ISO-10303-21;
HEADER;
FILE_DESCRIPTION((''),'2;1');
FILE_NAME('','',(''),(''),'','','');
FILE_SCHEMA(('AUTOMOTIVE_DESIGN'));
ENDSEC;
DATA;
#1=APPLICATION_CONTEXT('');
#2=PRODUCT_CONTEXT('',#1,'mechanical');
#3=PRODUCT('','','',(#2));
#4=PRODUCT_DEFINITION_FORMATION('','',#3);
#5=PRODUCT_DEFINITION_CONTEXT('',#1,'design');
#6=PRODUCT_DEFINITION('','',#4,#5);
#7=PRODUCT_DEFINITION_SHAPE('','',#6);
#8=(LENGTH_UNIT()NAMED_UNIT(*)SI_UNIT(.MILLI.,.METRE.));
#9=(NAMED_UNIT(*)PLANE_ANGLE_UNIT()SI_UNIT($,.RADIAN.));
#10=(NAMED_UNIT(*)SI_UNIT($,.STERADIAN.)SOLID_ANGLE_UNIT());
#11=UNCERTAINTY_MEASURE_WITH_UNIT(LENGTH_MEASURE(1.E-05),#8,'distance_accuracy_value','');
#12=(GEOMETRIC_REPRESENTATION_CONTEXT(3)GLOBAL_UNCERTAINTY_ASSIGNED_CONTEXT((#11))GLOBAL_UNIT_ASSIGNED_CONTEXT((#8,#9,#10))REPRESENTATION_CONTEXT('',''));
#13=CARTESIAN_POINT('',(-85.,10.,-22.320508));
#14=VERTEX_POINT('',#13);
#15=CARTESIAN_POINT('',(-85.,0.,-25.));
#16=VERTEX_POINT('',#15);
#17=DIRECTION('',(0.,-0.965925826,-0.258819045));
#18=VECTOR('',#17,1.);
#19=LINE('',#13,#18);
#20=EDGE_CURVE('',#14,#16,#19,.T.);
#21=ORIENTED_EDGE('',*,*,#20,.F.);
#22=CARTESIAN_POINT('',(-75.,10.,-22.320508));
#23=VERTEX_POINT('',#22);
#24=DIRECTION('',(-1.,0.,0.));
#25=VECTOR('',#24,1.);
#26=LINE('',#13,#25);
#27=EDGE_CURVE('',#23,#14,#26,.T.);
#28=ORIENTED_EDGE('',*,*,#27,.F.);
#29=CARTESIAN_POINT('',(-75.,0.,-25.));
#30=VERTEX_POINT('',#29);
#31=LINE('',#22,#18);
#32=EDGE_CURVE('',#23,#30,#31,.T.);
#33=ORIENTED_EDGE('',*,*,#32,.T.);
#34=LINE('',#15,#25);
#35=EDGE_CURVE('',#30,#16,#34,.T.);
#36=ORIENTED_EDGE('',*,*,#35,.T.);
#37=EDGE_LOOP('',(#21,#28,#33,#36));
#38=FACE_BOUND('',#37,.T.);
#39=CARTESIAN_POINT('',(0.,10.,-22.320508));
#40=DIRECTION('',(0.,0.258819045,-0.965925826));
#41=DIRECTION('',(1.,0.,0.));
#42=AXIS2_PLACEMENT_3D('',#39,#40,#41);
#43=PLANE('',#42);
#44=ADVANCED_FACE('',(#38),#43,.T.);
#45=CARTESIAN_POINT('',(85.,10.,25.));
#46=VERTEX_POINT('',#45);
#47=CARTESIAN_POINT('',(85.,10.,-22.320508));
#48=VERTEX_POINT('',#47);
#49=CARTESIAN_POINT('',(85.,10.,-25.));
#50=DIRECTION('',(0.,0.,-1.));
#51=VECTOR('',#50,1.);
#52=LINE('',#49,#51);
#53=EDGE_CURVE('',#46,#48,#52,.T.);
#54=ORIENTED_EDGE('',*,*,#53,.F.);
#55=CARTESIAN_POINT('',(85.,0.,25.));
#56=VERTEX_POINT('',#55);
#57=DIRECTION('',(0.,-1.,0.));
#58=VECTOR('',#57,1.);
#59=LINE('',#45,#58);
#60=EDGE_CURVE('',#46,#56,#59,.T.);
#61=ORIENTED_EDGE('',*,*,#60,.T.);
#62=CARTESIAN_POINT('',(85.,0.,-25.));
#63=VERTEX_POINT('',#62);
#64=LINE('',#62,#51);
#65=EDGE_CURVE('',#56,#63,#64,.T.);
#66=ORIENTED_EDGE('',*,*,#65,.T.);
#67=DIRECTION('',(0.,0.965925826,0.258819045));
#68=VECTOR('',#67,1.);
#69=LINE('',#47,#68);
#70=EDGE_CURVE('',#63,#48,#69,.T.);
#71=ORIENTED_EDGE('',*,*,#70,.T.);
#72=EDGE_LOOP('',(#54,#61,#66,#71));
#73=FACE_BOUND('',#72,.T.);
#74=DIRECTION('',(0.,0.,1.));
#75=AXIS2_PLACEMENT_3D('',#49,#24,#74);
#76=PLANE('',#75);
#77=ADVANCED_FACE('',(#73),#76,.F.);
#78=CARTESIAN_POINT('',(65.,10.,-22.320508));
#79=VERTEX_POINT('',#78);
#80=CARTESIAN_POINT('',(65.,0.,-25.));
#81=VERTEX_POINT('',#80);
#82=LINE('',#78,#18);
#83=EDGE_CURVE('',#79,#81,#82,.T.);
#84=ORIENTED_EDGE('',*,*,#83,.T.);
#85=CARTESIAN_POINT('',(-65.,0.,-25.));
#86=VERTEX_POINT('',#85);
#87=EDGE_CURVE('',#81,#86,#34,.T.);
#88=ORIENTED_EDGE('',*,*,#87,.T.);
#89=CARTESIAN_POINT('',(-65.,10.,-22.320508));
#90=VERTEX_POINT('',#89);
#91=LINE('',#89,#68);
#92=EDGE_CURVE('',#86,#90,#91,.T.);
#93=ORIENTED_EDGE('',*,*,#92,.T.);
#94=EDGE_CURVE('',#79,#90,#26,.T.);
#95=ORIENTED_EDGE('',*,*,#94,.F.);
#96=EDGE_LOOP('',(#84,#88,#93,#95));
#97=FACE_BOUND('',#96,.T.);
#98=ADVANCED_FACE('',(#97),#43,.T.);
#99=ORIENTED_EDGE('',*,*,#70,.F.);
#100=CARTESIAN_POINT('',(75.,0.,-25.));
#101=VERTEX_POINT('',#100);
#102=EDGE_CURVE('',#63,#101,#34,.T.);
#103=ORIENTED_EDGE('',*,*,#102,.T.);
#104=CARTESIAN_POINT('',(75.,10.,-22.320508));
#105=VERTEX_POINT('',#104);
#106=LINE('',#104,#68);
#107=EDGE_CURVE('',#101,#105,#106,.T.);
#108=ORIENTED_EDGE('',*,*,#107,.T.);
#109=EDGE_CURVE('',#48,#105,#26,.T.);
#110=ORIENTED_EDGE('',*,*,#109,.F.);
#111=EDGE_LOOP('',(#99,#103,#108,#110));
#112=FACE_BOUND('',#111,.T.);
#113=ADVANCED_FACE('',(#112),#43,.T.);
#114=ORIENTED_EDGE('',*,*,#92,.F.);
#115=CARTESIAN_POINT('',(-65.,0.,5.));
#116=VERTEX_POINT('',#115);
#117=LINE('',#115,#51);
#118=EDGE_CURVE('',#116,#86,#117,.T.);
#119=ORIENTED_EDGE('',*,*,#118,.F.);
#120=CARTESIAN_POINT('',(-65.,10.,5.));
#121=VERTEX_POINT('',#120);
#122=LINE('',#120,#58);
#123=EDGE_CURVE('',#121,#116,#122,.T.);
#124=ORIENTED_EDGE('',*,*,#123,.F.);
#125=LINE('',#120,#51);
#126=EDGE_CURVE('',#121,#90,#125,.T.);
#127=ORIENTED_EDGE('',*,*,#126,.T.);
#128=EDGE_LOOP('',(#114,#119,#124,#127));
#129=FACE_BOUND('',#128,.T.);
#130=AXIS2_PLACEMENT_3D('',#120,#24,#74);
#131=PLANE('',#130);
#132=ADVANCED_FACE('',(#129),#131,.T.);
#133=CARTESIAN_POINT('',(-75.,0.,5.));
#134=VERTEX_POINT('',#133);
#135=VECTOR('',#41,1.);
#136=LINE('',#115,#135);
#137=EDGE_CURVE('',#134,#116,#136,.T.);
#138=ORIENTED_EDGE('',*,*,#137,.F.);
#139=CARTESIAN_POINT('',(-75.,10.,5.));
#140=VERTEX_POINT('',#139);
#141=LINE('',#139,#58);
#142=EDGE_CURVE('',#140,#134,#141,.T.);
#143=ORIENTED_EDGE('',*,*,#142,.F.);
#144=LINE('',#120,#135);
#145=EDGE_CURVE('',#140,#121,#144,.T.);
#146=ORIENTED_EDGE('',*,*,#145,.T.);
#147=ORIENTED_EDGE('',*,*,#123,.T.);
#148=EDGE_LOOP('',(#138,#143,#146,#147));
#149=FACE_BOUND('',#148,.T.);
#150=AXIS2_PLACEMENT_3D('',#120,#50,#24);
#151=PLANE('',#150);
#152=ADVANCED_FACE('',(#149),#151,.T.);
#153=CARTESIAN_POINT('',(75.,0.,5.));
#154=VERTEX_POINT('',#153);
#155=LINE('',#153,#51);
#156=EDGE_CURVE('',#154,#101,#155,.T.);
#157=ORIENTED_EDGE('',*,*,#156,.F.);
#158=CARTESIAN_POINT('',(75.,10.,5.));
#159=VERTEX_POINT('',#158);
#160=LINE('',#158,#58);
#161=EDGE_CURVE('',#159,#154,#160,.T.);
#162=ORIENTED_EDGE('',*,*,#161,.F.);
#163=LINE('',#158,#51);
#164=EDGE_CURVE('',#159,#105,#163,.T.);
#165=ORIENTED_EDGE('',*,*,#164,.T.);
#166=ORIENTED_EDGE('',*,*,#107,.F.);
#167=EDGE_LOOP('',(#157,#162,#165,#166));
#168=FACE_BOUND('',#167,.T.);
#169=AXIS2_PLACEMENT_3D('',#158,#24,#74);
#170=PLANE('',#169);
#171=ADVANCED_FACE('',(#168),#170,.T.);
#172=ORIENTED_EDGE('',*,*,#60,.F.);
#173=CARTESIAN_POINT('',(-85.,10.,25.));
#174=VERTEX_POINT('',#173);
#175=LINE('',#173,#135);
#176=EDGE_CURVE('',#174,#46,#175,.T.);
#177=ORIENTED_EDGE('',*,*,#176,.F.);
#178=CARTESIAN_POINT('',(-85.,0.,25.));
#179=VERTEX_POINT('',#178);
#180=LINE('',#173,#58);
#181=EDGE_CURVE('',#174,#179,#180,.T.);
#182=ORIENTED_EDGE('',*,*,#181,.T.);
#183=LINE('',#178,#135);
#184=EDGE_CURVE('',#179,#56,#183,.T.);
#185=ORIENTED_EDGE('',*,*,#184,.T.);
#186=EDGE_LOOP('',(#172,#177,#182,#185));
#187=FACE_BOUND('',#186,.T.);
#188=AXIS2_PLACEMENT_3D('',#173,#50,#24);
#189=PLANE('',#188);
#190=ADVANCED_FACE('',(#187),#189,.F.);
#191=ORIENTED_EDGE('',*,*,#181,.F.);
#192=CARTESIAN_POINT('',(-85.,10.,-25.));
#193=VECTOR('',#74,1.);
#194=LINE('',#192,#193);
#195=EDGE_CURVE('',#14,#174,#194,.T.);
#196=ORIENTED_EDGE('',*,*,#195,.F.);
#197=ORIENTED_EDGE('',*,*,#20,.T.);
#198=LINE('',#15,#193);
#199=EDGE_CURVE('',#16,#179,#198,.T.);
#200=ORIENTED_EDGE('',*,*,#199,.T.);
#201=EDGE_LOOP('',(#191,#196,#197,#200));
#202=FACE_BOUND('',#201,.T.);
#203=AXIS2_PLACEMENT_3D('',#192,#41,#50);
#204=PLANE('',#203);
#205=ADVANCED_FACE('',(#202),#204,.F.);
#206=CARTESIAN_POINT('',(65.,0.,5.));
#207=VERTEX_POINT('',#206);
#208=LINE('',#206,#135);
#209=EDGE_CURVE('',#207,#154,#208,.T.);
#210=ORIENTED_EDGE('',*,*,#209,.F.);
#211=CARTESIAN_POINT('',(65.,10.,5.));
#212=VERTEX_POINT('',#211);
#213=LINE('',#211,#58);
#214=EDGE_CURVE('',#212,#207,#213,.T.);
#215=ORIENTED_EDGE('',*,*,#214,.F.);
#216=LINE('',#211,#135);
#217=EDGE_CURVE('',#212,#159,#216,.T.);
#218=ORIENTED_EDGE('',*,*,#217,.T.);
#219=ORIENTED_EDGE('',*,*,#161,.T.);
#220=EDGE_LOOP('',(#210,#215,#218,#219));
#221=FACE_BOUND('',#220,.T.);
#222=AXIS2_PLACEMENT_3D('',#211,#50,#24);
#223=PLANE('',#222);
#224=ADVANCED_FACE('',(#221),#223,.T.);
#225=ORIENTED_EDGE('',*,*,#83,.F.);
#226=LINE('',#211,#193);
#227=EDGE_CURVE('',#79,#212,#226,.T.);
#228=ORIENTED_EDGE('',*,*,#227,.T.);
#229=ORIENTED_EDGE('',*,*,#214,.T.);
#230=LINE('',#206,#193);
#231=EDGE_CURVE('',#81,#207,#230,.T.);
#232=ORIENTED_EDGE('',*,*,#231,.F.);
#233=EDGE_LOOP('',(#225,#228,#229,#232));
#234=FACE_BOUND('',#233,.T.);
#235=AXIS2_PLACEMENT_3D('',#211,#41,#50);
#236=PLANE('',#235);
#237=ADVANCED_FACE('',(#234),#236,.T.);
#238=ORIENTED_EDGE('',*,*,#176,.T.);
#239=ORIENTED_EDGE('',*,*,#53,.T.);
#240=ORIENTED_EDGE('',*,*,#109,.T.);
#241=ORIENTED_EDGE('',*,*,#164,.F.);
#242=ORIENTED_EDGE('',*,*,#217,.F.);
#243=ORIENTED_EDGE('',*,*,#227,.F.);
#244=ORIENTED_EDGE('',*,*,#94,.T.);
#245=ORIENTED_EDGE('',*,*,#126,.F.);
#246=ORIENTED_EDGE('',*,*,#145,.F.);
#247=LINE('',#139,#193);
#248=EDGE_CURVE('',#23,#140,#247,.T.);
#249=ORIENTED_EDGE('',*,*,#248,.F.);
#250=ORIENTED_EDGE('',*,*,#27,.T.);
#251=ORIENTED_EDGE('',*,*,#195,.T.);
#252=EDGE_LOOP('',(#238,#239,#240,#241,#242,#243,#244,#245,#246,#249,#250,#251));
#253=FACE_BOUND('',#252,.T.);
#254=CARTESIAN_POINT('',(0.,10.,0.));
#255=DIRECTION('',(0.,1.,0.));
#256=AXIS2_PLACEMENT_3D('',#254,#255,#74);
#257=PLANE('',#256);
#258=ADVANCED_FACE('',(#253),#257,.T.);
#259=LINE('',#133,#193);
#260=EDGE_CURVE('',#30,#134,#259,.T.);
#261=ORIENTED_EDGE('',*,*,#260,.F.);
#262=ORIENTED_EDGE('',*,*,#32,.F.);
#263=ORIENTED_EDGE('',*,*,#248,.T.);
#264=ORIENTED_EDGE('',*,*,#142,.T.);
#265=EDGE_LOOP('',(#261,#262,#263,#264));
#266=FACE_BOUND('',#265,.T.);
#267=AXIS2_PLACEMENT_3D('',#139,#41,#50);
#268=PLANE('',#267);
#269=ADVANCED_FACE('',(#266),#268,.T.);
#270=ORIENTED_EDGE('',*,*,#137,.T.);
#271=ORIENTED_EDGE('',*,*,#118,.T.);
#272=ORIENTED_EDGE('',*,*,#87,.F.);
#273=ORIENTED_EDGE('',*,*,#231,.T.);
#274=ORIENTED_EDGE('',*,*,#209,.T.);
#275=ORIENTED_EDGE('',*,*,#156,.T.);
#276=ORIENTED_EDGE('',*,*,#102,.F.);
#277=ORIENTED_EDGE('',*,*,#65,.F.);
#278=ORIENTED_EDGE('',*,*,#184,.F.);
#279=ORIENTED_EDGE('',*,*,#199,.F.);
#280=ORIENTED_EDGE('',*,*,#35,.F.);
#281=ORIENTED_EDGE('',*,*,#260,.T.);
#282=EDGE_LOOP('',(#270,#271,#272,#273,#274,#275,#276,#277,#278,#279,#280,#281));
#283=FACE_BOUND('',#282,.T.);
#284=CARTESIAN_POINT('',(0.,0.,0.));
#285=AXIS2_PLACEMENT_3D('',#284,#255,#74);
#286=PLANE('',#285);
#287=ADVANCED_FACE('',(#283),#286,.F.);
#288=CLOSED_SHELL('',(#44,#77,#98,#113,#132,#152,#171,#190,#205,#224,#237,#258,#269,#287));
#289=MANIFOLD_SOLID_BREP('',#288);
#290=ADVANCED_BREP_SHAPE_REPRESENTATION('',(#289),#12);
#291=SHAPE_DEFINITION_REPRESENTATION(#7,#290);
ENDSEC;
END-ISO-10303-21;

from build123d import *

# Parameters (mm, degrees)
SKETCH2_W           = 170
SKETCH2_H           = 50
BOSS_EXTRUDE1_DEPTH = 10
CHAMFER1_SIZE2      = 2.679491924
CHAMFER1_SIZE       = 10
SKETCH4_W           = 10
SKETCH4_H           = 30
CUT_EXTRUDE1_DEPTH  = 10


with BuildPart() as part:
    # Sketch2 → Boss-Extrude1 (new body)
    with BuildSketch(Plane(origin=(0, 0, 0), x_dir=(1, 0, 0), z_dir=(0, 1, 0))):
        Rectangle(SKETCH2_W, SKETCH2_H)
    extrude(amount=BOSS_EXTRUDE1_DEPTH)

    # Chamfer1
    chamfer1_edges = [part.edges().sort_by_distance(p)[0] for p in [
        (0, 10, -25),
    ]]
    chamfer1_side = [part.faces().sort_by_distance(p)[0] for p in [
        (0, 9.946410162, -25),
    ]]
    chamfer(chamfer1_edges, length=CHAMFER1_SIZE - 0.0001, length2=CHAMFER1_SIZE2 - 0.0001, reference=chamfer1_side[0])  # a hair under: the kernel refuses the full size

    # Sketch4 → Cut-Extrude1 (cut)
    with BuildSketch(Plane(origin=(0, 0, 0), x_dir=(1, 0, 0), z_dir=(0, 1, 0))):
        with Locations((70, 10)):
            Rectangle(SKETCH4_W, SKETCH4_H)
        with Locations((-70, 10)):
            Rectangle(SKETCH4_W, SKETCH4_H)
    extrude(amount=CUT_EXTRUDE1_DEPTH, mode=Mode.SUBTRACT)


solid = part.part
